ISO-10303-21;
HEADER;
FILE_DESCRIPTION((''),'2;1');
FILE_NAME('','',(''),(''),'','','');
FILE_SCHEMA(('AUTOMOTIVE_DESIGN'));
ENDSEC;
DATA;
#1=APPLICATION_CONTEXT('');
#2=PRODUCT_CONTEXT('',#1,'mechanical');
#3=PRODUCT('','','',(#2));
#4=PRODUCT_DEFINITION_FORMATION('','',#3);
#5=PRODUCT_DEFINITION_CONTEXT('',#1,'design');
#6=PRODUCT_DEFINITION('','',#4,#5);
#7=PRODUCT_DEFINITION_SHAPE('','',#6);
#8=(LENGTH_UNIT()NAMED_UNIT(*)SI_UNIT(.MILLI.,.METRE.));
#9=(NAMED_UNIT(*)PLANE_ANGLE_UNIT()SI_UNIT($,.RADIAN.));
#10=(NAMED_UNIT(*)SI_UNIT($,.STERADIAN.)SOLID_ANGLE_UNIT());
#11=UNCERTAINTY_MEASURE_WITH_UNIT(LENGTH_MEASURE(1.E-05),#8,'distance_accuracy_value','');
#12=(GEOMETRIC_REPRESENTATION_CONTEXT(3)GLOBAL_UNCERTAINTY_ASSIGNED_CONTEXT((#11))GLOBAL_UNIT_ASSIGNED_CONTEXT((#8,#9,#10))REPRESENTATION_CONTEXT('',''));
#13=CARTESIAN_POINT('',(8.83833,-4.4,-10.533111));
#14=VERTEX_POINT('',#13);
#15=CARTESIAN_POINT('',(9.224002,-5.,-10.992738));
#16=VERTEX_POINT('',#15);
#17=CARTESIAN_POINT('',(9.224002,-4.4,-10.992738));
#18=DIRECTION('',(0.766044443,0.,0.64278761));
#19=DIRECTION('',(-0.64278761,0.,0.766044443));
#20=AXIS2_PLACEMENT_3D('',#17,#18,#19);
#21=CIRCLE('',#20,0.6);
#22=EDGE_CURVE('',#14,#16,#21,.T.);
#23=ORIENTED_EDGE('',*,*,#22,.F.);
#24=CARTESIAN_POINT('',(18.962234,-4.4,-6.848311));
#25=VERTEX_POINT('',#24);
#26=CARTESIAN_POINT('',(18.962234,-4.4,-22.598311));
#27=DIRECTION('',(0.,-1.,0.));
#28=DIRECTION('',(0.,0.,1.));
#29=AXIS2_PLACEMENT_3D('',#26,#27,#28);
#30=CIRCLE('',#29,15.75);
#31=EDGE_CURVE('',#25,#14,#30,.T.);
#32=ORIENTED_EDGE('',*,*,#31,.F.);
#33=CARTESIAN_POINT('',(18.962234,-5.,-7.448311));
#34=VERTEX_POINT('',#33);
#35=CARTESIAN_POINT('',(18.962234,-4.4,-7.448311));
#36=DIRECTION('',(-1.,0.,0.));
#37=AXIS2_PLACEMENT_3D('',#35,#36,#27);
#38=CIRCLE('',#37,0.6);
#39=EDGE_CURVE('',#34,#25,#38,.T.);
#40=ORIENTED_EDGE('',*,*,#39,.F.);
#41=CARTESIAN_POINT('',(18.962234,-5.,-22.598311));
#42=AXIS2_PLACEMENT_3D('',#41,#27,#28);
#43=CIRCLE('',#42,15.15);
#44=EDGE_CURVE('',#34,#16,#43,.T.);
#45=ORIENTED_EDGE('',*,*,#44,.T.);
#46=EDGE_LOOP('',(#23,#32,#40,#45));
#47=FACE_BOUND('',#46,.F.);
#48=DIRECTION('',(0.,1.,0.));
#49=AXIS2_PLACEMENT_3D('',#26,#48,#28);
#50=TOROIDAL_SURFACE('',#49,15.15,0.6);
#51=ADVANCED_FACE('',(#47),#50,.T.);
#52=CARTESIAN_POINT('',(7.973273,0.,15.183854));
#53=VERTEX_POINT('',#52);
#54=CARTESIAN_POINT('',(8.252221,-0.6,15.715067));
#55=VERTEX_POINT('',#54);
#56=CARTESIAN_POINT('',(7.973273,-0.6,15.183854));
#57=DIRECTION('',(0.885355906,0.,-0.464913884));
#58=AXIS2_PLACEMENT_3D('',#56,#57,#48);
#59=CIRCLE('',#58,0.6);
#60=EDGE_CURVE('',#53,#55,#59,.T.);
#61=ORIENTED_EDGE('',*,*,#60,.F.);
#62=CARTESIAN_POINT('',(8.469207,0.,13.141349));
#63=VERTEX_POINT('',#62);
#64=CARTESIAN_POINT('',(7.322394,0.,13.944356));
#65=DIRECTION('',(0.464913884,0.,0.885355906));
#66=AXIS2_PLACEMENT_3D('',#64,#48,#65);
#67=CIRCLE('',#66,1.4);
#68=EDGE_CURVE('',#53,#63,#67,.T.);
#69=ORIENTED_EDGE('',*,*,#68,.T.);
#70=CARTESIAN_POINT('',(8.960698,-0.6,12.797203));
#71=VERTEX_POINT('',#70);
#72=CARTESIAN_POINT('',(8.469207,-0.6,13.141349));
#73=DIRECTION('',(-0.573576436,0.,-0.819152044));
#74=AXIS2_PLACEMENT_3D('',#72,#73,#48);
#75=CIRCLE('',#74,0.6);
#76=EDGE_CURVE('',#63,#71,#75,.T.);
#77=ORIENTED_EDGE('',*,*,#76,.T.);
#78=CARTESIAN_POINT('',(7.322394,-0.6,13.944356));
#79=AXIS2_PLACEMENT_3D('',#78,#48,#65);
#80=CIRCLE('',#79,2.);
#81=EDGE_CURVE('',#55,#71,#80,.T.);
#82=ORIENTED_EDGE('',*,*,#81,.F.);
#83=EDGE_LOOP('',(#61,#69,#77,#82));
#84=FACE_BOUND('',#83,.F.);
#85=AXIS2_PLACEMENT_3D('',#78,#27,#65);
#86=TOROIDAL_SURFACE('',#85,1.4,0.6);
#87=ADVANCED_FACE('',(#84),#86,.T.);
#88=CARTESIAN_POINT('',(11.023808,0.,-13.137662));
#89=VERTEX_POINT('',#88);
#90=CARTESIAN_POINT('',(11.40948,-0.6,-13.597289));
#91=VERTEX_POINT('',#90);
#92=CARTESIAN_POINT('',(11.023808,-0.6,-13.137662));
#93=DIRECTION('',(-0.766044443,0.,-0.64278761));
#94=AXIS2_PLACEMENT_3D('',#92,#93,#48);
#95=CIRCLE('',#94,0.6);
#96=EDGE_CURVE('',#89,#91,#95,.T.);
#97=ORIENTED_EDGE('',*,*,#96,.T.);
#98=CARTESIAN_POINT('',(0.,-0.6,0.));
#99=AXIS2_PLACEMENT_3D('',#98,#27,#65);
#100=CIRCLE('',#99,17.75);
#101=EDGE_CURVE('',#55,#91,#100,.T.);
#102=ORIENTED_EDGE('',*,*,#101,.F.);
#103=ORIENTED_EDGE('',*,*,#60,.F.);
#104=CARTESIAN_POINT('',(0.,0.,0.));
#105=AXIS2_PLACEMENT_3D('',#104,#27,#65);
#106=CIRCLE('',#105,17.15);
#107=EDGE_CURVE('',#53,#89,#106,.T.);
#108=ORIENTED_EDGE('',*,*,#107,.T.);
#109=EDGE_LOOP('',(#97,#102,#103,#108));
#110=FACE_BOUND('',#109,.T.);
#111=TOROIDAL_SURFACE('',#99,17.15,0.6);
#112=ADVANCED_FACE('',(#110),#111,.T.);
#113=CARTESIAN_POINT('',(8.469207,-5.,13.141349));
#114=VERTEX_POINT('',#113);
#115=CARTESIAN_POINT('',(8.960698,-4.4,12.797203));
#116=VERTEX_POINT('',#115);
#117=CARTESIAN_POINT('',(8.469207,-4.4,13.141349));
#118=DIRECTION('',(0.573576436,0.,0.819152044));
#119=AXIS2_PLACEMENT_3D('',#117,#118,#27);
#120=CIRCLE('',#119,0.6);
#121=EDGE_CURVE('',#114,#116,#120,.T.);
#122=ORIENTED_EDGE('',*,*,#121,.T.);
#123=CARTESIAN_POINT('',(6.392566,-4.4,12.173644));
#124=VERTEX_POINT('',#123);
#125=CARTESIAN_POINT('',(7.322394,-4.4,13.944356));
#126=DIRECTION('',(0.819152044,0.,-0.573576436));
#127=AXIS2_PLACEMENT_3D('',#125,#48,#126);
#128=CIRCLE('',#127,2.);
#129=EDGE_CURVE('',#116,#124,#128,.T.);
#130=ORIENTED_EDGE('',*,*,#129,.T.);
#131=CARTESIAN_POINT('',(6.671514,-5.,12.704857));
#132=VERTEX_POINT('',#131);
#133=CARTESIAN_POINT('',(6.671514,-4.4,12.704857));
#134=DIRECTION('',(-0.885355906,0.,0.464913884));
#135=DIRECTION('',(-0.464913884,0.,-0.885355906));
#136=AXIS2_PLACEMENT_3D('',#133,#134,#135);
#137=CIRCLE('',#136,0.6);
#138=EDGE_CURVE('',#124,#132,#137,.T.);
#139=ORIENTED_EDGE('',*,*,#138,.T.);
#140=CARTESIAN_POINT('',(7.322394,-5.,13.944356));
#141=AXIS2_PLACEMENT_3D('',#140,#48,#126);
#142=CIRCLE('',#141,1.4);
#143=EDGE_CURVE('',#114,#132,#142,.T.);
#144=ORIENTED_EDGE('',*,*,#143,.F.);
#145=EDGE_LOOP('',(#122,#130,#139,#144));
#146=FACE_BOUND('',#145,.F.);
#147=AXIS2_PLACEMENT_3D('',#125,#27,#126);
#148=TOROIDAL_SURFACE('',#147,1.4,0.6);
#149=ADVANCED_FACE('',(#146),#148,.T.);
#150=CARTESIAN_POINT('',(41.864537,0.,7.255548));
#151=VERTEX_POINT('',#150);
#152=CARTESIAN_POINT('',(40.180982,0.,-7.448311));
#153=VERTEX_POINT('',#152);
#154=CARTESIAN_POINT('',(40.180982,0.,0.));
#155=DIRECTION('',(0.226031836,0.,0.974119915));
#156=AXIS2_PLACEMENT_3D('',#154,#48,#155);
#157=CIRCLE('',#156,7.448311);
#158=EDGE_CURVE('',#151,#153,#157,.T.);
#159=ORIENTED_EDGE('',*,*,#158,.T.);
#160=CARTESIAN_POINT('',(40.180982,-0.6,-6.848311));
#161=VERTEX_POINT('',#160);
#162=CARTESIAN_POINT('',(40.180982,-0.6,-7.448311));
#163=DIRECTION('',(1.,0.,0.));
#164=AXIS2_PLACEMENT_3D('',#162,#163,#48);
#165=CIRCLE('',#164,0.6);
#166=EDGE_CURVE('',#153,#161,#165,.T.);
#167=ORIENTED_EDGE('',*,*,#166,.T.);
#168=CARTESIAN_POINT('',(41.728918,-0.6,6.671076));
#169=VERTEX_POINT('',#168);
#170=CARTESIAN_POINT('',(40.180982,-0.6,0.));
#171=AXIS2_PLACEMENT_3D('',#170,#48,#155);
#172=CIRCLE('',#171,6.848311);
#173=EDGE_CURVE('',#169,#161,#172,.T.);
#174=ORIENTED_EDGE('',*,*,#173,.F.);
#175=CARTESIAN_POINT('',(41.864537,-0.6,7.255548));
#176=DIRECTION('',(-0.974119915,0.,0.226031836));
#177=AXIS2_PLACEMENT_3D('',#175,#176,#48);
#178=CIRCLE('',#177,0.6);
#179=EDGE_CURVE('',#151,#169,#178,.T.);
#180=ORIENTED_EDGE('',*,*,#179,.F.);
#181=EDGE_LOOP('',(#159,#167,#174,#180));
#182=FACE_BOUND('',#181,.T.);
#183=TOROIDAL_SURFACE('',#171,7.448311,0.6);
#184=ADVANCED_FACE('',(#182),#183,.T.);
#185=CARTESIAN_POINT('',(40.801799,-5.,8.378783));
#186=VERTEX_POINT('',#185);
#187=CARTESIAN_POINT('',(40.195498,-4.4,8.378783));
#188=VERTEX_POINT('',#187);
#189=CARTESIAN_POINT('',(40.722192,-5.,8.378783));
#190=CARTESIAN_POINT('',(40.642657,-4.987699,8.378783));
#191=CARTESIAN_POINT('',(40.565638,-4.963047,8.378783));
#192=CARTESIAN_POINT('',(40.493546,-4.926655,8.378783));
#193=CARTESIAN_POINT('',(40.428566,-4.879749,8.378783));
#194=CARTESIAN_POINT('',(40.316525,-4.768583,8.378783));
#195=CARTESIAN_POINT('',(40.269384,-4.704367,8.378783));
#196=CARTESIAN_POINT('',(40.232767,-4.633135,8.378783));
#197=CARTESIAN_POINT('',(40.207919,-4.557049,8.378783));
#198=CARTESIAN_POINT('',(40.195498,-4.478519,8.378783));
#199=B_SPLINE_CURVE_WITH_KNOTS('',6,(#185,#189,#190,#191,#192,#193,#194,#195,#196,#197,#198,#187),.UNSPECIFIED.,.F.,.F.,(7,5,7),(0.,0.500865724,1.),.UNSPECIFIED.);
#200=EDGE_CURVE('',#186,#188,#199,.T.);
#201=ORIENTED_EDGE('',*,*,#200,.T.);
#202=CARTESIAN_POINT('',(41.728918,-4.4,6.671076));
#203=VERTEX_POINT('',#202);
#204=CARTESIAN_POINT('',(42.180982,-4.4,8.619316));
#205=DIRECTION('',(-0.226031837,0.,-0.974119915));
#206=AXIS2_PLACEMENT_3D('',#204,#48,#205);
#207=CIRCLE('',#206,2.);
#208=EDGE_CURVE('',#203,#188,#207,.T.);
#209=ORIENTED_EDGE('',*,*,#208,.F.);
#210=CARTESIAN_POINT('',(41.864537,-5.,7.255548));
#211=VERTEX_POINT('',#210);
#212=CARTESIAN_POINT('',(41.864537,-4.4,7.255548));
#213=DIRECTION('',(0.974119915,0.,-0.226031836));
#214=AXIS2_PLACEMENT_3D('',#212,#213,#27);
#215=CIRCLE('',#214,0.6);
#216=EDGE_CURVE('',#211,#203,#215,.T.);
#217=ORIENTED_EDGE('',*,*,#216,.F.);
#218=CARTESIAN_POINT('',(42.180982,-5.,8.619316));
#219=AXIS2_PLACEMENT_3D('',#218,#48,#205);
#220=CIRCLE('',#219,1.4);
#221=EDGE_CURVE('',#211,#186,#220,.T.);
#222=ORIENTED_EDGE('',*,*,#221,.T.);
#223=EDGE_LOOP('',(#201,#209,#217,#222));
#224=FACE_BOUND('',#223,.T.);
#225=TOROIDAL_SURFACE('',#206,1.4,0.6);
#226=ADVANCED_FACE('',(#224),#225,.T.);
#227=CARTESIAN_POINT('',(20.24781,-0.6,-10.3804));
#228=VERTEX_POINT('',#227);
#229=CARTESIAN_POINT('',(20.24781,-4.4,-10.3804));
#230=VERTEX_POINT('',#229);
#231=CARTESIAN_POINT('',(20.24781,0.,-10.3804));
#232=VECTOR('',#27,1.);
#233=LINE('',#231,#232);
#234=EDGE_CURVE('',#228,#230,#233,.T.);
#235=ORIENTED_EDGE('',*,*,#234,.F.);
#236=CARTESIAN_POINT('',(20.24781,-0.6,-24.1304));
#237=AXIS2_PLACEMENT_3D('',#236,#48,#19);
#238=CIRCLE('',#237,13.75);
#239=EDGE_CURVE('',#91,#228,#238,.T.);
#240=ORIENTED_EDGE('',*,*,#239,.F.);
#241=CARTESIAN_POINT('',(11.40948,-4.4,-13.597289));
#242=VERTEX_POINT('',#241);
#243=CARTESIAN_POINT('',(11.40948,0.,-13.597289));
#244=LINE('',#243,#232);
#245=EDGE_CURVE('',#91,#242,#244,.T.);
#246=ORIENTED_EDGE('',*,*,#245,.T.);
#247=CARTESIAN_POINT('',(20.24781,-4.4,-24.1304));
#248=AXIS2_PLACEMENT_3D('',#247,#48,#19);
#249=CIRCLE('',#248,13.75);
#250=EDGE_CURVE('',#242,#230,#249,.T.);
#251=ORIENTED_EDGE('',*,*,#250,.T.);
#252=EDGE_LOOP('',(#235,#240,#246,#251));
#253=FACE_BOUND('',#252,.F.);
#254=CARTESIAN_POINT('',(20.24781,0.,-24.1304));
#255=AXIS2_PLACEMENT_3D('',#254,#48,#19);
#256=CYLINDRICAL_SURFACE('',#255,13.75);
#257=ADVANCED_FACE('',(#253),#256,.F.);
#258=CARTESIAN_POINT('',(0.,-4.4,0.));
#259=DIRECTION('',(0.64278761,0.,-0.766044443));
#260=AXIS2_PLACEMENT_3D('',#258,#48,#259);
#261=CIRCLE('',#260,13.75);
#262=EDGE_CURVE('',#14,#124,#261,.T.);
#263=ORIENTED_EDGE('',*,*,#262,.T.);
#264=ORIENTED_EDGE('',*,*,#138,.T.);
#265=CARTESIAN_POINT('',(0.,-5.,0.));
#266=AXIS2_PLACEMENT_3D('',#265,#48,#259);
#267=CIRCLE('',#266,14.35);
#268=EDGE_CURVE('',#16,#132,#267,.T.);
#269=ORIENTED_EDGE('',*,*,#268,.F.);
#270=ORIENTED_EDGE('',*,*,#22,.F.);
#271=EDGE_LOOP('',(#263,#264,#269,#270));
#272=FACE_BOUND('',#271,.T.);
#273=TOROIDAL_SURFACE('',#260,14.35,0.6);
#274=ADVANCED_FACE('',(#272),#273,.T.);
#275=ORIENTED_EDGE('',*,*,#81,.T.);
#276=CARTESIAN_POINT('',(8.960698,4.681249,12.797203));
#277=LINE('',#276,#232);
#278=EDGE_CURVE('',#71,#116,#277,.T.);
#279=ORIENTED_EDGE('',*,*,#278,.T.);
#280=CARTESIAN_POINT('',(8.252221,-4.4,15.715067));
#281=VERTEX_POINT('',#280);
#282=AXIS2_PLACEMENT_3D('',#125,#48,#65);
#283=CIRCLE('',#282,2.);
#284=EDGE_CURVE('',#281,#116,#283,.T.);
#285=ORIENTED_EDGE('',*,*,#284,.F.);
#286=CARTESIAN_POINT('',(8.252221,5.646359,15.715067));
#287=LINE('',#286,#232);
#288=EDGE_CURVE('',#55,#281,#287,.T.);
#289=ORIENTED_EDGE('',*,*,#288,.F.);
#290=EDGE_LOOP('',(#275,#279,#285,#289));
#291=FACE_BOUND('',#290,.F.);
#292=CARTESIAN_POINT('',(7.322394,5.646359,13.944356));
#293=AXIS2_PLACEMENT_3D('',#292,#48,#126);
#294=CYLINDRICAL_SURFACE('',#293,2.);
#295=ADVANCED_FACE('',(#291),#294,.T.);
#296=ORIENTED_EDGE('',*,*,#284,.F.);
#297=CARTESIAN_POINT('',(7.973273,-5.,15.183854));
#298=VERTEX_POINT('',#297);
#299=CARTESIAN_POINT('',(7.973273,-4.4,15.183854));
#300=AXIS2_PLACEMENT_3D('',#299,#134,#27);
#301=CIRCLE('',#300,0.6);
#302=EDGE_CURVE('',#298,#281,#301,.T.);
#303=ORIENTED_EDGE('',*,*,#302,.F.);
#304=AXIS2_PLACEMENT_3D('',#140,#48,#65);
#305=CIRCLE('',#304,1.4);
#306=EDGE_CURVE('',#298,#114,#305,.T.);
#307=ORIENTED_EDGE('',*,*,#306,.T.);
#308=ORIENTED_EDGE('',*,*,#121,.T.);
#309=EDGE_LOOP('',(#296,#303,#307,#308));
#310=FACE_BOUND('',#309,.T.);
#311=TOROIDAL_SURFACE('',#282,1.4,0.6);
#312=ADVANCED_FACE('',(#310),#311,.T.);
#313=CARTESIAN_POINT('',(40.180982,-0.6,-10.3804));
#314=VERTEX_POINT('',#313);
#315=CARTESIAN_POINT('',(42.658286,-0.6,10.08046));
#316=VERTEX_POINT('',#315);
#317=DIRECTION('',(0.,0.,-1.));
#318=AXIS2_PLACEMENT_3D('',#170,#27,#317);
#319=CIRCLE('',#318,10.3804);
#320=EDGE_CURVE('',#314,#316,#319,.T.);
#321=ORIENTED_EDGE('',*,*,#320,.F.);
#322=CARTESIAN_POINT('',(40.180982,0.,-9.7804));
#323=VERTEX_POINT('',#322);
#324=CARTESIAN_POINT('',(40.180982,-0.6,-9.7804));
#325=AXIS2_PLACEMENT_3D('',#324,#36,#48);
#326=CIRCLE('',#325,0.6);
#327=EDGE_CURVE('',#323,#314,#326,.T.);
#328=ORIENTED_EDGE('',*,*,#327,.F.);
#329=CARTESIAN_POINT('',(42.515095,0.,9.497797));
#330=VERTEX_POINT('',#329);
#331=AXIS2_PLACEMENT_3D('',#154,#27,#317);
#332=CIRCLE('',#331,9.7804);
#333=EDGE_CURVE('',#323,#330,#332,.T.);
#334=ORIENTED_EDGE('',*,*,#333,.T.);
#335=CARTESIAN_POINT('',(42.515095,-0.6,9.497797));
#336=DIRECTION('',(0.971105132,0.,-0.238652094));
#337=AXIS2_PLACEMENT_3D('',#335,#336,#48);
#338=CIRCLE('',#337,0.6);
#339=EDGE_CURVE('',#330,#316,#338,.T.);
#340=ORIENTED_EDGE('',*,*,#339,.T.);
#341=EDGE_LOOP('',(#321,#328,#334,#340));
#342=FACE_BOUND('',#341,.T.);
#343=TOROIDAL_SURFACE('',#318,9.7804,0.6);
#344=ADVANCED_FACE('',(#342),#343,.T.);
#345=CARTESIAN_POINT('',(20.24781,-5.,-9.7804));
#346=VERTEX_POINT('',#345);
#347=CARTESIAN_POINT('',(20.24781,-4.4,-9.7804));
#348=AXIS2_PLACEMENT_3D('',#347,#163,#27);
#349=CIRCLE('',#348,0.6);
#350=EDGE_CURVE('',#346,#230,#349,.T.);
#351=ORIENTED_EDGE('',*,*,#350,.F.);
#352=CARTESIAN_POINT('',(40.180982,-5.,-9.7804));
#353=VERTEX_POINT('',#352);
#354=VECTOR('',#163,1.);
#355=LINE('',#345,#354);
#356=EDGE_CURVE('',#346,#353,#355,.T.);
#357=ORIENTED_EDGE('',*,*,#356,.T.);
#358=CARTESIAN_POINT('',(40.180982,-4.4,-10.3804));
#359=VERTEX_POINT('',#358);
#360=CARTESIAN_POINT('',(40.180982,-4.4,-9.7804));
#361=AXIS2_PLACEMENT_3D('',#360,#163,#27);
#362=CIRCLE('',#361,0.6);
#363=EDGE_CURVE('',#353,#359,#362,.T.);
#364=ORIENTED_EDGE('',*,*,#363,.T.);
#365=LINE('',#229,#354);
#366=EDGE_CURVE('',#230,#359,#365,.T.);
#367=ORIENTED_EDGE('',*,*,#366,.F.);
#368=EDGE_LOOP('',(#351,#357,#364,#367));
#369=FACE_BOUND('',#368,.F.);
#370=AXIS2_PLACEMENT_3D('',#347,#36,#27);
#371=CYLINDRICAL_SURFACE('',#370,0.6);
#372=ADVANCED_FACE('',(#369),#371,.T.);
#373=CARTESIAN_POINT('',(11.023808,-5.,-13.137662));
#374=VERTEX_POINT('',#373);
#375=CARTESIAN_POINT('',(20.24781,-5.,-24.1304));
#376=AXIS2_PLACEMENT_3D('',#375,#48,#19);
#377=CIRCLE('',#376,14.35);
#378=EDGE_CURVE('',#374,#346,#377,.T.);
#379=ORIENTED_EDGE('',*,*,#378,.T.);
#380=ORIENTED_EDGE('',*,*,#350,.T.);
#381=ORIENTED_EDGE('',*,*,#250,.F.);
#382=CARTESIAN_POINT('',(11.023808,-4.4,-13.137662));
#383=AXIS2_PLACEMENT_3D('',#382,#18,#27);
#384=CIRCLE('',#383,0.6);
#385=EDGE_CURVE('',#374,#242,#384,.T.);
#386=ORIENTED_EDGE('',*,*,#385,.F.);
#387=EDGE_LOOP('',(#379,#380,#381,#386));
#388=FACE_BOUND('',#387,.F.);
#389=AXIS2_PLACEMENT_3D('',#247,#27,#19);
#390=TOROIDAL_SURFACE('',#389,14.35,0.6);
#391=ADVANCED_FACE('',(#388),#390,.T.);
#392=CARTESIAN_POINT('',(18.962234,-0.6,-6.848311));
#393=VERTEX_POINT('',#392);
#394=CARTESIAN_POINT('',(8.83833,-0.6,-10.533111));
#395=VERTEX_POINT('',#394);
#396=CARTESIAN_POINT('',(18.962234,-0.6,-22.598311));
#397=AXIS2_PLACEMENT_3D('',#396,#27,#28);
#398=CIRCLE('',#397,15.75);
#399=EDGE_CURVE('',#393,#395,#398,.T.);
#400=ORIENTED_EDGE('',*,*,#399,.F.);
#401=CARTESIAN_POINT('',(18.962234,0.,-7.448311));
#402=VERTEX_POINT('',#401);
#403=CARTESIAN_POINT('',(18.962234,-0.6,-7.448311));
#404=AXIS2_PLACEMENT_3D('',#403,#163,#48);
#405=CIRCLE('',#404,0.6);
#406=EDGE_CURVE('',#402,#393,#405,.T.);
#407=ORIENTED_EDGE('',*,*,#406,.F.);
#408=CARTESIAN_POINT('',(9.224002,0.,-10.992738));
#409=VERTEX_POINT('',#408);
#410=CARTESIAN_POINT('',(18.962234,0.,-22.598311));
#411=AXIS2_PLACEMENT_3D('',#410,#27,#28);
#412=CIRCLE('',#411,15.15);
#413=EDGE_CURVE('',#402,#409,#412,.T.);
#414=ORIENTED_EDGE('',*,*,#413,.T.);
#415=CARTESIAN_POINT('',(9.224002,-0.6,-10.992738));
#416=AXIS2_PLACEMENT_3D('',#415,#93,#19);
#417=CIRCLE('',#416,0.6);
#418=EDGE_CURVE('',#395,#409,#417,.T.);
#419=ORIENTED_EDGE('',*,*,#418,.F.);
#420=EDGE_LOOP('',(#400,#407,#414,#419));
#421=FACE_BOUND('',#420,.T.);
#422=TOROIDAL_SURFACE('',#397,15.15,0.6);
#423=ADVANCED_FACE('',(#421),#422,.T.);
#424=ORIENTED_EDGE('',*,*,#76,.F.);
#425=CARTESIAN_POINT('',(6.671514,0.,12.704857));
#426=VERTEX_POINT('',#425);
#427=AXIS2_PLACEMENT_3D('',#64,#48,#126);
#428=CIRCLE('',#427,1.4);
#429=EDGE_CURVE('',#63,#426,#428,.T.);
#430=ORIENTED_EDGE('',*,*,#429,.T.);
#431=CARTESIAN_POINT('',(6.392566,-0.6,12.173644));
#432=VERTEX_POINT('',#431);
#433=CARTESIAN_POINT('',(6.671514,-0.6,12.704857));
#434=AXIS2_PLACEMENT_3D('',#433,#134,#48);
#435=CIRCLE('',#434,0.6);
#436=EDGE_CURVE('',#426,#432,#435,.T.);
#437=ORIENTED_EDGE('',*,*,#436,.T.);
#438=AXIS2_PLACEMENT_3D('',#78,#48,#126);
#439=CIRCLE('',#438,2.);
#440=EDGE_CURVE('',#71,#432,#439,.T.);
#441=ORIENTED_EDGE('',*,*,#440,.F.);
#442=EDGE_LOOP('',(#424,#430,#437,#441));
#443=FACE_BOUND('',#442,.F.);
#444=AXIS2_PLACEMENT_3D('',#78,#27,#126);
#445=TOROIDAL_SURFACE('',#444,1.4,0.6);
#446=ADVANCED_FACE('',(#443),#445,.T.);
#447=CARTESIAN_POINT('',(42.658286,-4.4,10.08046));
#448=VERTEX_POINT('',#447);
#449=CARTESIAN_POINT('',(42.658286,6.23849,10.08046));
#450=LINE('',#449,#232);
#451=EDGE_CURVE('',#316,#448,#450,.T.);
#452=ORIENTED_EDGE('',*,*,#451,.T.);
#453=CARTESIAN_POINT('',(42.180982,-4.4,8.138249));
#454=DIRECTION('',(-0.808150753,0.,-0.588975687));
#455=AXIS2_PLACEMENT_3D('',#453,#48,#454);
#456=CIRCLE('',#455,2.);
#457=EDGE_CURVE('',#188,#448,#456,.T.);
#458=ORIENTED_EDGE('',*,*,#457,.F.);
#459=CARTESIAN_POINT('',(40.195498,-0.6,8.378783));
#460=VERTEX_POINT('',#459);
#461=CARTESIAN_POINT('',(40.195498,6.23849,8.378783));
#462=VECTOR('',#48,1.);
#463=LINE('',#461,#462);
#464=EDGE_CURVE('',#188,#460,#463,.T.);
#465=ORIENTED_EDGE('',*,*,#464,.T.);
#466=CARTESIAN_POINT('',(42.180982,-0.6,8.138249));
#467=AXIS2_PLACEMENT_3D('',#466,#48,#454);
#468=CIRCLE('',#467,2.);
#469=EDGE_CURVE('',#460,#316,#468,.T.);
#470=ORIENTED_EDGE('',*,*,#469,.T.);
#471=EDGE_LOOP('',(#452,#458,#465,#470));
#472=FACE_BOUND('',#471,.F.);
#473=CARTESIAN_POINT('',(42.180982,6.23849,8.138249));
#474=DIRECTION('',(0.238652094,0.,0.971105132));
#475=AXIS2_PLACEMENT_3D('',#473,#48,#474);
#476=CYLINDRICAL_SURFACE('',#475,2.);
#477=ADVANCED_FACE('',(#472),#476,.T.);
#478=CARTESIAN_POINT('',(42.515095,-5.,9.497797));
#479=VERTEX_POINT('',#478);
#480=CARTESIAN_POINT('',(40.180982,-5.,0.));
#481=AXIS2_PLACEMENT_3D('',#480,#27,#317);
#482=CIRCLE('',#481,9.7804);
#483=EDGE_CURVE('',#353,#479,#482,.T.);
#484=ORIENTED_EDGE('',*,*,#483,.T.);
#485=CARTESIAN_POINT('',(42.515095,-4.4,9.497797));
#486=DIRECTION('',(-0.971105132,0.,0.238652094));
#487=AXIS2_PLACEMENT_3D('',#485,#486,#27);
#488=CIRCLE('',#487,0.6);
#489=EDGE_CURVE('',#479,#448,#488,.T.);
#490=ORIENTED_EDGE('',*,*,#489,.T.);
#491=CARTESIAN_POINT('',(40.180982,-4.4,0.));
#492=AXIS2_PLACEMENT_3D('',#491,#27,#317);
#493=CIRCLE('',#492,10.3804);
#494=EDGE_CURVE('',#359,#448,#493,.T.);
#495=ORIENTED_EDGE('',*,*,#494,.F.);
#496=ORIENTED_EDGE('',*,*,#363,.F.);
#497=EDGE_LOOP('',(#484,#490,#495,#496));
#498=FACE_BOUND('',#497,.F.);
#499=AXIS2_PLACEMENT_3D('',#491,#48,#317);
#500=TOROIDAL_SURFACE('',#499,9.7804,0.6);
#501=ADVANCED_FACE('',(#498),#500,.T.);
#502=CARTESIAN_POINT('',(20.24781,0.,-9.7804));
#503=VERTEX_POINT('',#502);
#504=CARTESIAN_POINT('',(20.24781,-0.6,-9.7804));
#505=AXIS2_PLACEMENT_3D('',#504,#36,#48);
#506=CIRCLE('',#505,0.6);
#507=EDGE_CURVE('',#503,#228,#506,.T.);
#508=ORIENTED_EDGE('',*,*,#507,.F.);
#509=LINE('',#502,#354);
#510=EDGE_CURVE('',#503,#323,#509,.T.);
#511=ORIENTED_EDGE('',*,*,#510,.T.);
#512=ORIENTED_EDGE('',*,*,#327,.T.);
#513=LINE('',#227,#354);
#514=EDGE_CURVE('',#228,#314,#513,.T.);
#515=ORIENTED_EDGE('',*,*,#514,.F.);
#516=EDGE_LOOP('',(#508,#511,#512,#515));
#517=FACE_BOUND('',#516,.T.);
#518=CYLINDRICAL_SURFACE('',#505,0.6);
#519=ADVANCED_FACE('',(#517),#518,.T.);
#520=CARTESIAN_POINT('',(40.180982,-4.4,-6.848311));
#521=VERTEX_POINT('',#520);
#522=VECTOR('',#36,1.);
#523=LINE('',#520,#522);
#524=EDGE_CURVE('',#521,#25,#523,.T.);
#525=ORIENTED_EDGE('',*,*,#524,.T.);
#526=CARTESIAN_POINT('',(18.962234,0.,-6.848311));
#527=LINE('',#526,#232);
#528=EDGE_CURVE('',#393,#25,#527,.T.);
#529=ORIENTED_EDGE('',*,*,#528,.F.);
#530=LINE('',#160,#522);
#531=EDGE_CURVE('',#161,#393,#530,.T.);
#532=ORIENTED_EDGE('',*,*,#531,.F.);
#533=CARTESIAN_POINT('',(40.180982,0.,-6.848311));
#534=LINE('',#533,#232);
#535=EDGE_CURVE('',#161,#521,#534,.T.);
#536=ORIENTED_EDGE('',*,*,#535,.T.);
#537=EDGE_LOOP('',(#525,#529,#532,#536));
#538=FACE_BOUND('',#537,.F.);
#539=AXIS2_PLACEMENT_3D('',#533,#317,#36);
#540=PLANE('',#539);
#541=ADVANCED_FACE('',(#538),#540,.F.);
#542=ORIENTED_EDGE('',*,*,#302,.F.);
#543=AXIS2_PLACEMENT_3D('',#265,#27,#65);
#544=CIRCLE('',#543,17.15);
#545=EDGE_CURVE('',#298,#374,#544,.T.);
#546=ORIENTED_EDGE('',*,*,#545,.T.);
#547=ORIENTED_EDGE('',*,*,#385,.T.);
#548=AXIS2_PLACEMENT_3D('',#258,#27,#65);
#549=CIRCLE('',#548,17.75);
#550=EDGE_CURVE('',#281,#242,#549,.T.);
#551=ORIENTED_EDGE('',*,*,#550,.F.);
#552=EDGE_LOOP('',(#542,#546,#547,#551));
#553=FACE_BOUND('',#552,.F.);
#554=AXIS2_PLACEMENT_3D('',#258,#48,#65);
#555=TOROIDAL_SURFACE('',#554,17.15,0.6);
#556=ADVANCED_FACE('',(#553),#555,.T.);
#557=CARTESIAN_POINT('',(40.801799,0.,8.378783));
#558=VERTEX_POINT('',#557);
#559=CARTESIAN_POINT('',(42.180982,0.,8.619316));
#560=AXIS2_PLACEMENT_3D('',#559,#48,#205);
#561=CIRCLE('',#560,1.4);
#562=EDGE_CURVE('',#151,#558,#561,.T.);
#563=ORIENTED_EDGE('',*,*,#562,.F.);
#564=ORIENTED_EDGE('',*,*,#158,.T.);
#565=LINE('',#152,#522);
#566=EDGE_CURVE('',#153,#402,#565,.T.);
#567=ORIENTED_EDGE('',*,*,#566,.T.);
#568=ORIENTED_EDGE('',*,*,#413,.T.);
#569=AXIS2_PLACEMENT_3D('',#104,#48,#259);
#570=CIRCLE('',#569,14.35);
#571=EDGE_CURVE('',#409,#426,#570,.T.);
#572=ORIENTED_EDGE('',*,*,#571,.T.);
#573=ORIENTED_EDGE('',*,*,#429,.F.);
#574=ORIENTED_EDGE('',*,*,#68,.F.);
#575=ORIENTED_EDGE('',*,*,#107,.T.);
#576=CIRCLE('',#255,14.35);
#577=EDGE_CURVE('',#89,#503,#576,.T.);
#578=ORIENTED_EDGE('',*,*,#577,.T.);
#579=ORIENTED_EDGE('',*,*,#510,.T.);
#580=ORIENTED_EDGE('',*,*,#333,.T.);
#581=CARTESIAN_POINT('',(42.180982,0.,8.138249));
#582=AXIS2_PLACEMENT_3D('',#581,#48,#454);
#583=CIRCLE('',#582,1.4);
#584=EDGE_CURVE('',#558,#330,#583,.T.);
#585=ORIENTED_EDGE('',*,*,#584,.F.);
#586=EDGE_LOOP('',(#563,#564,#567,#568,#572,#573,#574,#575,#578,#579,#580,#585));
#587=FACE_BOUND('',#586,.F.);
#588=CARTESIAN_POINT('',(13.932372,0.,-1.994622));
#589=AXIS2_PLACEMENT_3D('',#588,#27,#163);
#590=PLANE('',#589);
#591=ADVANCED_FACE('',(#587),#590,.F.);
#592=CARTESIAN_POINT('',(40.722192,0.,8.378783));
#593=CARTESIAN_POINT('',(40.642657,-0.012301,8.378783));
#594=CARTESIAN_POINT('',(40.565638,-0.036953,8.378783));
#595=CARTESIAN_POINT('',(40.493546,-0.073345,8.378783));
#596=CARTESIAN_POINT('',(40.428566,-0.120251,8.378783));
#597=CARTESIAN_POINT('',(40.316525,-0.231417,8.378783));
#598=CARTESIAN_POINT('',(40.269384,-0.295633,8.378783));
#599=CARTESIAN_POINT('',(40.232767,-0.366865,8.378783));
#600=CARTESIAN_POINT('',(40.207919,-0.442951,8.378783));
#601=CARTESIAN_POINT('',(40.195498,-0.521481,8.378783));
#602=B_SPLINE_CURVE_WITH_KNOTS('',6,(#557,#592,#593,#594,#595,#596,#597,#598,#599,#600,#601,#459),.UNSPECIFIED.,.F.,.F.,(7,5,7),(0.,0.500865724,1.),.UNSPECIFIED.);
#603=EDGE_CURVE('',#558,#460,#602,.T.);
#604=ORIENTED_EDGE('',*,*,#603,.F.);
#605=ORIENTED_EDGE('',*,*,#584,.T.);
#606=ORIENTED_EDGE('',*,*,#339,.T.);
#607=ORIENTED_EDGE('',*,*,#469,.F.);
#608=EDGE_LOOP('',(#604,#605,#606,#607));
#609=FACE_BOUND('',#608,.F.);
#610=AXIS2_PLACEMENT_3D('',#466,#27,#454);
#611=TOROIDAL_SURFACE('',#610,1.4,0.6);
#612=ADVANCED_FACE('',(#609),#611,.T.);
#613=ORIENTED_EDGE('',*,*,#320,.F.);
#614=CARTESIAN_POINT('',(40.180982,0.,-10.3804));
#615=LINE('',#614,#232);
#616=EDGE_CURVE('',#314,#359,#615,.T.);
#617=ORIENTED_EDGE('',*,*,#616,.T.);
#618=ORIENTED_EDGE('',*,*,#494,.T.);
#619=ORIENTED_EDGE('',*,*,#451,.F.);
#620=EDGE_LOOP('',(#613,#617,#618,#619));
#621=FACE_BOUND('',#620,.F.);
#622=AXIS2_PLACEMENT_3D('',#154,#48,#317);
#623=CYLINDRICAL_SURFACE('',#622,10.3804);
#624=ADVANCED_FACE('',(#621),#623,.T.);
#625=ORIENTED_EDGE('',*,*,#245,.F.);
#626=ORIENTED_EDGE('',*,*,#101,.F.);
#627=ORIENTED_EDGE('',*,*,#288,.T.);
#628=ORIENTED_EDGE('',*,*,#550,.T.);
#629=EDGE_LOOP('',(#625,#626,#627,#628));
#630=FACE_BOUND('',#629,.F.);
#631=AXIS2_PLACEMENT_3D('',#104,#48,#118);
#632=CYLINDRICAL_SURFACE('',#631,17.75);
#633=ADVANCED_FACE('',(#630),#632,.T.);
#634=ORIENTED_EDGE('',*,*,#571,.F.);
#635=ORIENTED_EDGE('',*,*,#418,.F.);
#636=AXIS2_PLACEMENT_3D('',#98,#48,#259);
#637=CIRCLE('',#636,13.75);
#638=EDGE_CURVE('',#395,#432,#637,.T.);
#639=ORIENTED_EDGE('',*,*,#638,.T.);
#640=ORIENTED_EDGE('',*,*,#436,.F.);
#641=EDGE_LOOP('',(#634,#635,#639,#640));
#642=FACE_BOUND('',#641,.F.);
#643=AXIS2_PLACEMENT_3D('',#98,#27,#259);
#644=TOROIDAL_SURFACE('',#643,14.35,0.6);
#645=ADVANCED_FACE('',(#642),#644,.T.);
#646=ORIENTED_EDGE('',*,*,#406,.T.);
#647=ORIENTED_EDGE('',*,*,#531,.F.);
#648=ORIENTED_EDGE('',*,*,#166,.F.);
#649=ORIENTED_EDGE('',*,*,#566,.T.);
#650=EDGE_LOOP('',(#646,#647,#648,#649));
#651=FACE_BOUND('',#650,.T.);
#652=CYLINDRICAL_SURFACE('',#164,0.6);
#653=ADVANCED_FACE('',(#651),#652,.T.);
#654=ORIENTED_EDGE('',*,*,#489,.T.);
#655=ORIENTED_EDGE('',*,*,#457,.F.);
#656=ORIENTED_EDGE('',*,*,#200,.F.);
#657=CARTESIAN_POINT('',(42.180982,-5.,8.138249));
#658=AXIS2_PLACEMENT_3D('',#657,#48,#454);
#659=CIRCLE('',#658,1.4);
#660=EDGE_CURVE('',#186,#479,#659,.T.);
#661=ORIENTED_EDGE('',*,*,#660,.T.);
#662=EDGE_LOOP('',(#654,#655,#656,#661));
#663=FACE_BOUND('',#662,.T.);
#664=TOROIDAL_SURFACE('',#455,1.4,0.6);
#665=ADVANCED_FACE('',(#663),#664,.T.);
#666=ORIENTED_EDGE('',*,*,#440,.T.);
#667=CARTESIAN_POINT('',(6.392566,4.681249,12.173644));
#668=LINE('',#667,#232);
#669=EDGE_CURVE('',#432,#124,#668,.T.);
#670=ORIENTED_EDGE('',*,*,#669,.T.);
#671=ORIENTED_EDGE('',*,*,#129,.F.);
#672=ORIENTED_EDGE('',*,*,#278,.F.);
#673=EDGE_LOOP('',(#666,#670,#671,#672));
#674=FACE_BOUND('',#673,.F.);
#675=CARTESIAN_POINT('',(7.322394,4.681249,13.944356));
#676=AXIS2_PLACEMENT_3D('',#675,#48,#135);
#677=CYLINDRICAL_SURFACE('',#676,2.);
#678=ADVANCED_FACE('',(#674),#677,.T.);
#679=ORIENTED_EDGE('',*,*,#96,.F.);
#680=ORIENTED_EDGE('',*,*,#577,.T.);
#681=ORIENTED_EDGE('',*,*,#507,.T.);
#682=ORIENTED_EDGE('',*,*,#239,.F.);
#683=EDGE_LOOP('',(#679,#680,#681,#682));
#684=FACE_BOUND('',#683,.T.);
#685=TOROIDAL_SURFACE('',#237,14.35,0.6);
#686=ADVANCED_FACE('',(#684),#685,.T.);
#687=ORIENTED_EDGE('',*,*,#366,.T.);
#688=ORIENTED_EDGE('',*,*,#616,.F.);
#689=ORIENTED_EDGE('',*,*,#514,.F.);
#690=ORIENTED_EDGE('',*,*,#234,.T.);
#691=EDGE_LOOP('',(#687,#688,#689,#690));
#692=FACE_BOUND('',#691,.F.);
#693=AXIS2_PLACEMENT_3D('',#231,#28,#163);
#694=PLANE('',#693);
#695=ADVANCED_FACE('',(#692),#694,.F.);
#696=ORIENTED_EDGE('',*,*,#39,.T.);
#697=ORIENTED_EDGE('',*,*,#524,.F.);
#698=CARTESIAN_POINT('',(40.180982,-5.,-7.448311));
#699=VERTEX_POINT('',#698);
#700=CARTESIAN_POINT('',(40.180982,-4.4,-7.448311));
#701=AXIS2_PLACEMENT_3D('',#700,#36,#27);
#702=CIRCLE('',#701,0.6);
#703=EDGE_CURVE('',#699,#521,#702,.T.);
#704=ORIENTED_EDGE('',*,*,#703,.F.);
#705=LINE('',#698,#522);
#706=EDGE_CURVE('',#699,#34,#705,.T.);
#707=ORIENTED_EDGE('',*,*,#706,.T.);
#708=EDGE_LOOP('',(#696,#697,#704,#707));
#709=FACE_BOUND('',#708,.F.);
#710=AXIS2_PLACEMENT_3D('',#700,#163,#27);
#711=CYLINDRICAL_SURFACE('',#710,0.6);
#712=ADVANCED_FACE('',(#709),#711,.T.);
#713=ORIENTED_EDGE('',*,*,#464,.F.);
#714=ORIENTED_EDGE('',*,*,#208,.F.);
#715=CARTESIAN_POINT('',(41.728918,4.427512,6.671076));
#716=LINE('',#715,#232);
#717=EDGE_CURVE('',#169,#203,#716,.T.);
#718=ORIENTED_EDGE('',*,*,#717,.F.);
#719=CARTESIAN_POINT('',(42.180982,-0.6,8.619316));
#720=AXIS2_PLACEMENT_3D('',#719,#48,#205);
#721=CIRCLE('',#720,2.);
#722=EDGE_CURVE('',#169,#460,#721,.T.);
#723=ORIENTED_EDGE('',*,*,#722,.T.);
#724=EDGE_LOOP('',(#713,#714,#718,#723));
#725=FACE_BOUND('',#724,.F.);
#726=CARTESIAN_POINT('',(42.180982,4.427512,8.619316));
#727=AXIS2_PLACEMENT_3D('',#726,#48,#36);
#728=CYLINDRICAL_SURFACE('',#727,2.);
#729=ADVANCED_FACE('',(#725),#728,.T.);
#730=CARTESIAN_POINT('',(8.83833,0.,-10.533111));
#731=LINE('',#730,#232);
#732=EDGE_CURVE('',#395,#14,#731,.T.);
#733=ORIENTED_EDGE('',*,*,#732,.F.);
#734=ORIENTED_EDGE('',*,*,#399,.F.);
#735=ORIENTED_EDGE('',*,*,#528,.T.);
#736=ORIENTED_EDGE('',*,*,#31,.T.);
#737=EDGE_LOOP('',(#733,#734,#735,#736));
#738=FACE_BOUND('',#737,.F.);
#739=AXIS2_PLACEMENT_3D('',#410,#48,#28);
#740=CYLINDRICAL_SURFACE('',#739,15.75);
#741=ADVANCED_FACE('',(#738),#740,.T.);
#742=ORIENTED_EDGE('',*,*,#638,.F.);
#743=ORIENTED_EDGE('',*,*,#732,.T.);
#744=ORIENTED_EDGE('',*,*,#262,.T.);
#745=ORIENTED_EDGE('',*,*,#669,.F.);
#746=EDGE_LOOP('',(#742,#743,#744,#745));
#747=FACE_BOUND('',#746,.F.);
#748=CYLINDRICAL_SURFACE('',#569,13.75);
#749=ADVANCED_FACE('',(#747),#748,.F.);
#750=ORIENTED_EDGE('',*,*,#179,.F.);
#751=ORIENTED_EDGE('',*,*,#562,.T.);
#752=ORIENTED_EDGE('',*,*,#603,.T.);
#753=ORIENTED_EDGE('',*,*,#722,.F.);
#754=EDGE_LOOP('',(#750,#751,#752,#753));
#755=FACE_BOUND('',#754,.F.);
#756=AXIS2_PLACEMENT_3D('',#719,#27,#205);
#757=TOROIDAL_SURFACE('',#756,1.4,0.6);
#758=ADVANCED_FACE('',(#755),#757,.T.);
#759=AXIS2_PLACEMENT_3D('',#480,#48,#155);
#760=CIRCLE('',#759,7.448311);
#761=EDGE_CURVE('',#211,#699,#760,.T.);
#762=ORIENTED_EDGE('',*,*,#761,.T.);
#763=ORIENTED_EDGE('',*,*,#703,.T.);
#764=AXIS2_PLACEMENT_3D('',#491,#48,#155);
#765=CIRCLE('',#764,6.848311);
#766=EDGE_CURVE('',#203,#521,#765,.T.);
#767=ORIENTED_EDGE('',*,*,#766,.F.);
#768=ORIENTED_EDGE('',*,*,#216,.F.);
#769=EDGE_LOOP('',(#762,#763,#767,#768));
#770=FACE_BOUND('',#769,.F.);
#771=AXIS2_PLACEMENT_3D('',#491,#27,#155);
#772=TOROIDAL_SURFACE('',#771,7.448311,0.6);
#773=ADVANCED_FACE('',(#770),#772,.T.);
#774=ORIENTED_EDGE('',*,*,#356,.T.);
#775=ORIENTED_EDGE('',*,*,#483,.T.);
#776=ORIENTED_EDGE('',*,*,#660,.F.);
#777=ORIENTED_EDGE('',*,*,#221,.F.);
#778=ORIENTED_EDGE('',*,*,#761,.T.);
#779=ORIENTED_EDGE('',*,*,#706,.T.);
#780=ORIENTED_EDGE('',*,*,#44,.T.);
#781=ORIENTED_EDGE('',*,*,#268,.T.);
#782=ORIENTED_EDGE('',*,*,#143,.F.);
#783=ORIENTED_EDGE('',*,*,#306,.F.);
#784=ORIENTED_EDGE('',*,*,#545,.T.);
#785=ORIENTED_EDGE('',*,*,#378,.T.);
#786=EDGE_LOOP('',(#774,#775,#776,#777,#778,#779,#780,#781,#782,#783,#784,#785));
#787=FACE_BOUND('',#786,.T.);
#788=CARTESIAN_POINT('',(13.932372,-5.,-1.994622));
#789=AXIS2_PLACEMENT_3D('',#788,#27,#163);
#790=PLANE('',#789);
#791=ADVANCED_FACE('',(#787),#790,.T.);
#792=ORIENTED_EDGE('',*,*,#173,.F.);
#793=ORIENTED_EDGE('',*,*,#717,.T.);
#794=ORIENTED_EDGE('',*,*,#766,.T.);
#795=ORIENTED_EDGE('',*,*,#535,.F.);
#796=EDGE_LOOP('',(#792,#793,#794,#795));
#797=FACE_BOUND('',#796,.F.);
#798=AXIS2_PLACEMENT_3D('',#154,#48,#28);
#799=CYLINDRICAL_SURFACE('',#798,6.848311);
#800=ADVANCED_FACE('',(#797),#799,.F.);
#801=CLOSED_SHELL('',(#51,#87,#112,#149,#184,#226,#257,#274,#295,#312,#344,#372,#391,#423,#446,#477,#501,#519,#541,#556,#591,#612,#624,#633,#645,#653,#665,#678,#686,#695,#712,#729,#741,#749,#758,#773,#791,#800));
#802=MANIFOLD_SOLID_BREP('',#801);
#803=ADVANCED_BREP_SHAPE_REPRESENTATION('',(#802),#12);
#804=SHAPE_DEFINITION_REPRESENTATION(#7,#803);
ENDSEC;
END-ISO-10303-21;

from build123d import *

# Parameters (mm, degrees)
F1_DEPTH     = 5
F2_T1_DEPTH  = 14.3624989998
F2_T3_DEPTH  = 16.2927187909
F2_T5_DEPTH  = 17.4769790167
F2_T7_DEPTH  = 13.8550247905
F3_T3_ANGLE  = 247.7046489152
F3_T6_ANGLE  = 113.0112311354
F3_T9_ANGLE  = 139.8913530699
F3_T12_ANGLE = 166.1930004756
F3_T15_DEPTH = 19.9331720401
F3_T18_ANGLE = 40
F3_T21_ANGLE = 247.7046489152
F3_T24_ANGLE = 97.2953510826
F3_T27_ANGLE = 82.7046489032
F3_T30_ANGLE = 247.704648915
F3_T33_ANGLE = 40
F3_T36_DEPTH = 21.2187472595
F3_T39_ANGLE = 166.9364387389
F3_T42_ANGLE = 97.2953510826
F3_T45_ANGLE = 40
F3_T48_DEPTH = 19.9331720401
F3_T51_ANGLE = 166.1930004756
F3_T54_ANGLE = 139.8913530699
F3_T57_ANGLE = 82.7046489032
F3_T60_ANGLE = 247.704648915
F3_T63_ANGLE = 40
F3_T66_DEPTH = 21.2187472595
F3_T69_ANGLE = 166.9364387389
F3_T72_ANGLE = 113.0112311354


# Not quite as in the source:
# - a fillet or chamfer that OpenCascade refuses, or shapes differently, is made with other operations: its cross-section is extruded or revolved along the edge and cut away or added


with BuildPart() as f1:
    # F0 (on Front) → F1 (new body)
    with BuildSketch(Plane.XZ):
        with BuildLine():
            ThreePointArc((8.8383296332, -10.5331110929), (-13.7369130468, -0.5997665763), (7.8866759998, 11.263340609))
            Line((7.8866759998, 11.263340609), (10.1809817452, 14.5399487861))
            ThreePointArc((10.1809817452, 14.5399487861), (-17.7331059331, -0.7742441257), (11.4094800719, -13.5972888654))
            ThreePointArc((11.4094800719, -13.5972888654), (15.5450327344, -11.2096264224), (20.2478097051, -10.3803999582))
            Line((20.2478097051, -10.3803999582), (40.1809817452, -10.3803999582))
            ThreePointArc((40.1809817452, -10.3803999582), (50.5613817035, 0), (40.1809817452, 10.3803999582))
            Line((40.1809817452, 10.3803999582), (40.1809817452, 6.848311072))
            ThreePointArc((40.1809817452, 6.848311072), (47.0292928172, 0), (40.1809817452, -6.848311072))
            Line((40.1809817452, -6.848311072), (18.9622344858, -6.848311072))
            ThreePointArc((18.9622344858, -6.848311072), (13.5754172284, -7.7981522946), (8.8383296332, -10.5331110929))
        make_face()
    extrude(amount=F1_DEPTH)

    # F2: fillet of radius 2 on 4 edges, made by hand

    # F2_s2 → F2_t1 (cut)
    with BuildSketch(Plane.XZ.offset(-4.6812494999)):
        with BuildLine():
            ThreePointArc((6.3925659055, 12.1736437086), (7.7942952649, 12.0008255138), (8.9606977622, 12.797202648))
            Line((8.9606977622, 12.797202648), (7.8866759998, 11.263340609))
            ThreePointArc((7.8866759998, 11.263340609), (7.1541142206, 11.7422804309), (6.3925659055, 12.1736437086))
        make_face()
    extrude(amount=F2_T1_DEPTH, mode=Mode.SUBTRACT)

    # F2_s4 → F2_t3 (cut)
    with BuildSketch(Plane.XZ.offset(-5.6463593955)):
        with BuildLine():
            ThreePointArc((8.9606977622, 12.797202648), (9.2659236806, 14.4162571121), (8.2522214417, 15.7150673329))
            ThreePointArc((8.2522214417, 15.7150673329), (9.2353110847, 15.1582165563), (10.1809817452, 14.5399487861))
            Line((10.1809817452, 14.5399487861), (8.9606977622, 12.797202648))
        make_face()
    extrude(amount=F2_T3_DEPTH, mode=Mode.SUBTRACT)

    # F2_s6 → F2_t5 (cut)
    with BuildSketch(Plane.XZ.offset(-6.2384895083)):
        with BuildLine():
            ThreePointArc((42.6582859336, 10.0804596746), (40.947006133, 9.7121948311), (40.1809817452, 8.1382494101))
            Line((40.1809817452, 8.1382494101), (40.1809817452, 10.3803999582))
            ThreePointArc((40.1809817452, 10.3803999582), (41.4286796469, 10.3051420776), (42.6582859336, 10.0804596746))
        make_face()
    extrude(amount=F2_T5_DEPTH, mode=Mode.SUBTRACT)

    # F2_s8 → F2_t7 (cut)
    with BuildSketch(Plane.XZ.offset(-4.4275123953)):
        with BuildLine():
            ThreePointArc((40.1809817452, 8.6193160301), (40.6150750837, 7.3751551372), (41.7289180726, 6.6710761999))
            ThreePointArc((41.7289180726, 6.6710761999), (40.9600066282, 6.8038580798), (40.1809817452, 6.848311072))
            Line((40.1809817452, 6.848311072), (40.1809817452, 8.6193160301))
        make_face()
    extrude(amount=F2_T7_DEPTH, mode=Mode.SUBTRACT)

    # F3: fillet of radius 0.6 on 13 edges, made by hand


with BuildPart() as f3_tool1:
    # F3_s2 → F3_t3 (revolve)
    with BuildSketch(Plane(origin=(0, 0, 0), x_dir=(0, 1, 0), z_dir=(0.8853559061, 0, -0.464913884))):
        with BuildLine():
            ThreePointArc((-5, 17.15), (-4.8242640687, 17.5742640687), (-4.4, 17.75))
            Line((-4.4, 17.75), (-5, 17.75))
            Line((-5, 17.75), (-5, 17.15))
        make_face()
    revolve(axis=Axis((0, -5, 0), (0, -1, 0)), revolution_arc=F3_T3_ANGLE)


with BuildPart() as f3_tool4:
    # F3_s5 → F3_t6 (revolve)
    with BuildSketch(Plane(origin=(38.1281196757, 0, -8.8471334716), x_dir=(0, 1, 0), z_dir=(0.9741199151, 0, -0.2260318363))):
        with BuildLine():
            ThreePointArc((0, 16.5304921614), (-0.1757359313, 16.1062280927), (-0.6, 15.9304921614))
            Line((-0.6, 15.9304921614), (0, 15.9304921614))
            Line((0, 15.9304921614), (0, 16.5304921614))
        make_face()
    revolve(axis=Axis((42.1809817453, 0, 8.6193160301), (0, 1, 0)), revolution_arc=F3_T6_ANGLE)


with BuildPart() as f3_tool7:
    # F3_s8 → F3_t9 (revolve)
    with BuildSketch(Plane(origin=(10.7586070612, 0, -14.762199147), x_dir=(0, 1, 0), z_dir=(0.5889756878, 0, -0.8081507528))):
        with BuildLine():
            ThreePointArc((0, 37.4818231941), (-0.1757359313, 37.0575591254), (-0.6, 36.8818231941))
            Line((-0.6, 36.8818231941), (0, 36.8818231941))
            Line((0, 36.8818231941), (0, 37.4818231941))
        make_face()
    revolve(axis=Axis((42.1809817452, 0, 8.13824941), (0, 1, 0)), revolution_arc=F3_T9_ANGLE)


with BuildPart() as f3_tool10:
    # F3_s11 → F3_t12 (revolve)
    with BuildSketch(Plane.YZ.offset(40.1809817452)):
        with BuildLine():
            ThreePointArc((0, -9.7803999582), (-0.1757359313, -10.204664027), (-0.6, -10.3803999582))
            Line((-0.6, -10.3803999582), (0, -10.3803999582))
            Line((0, -10.3803999582), (0, -9.7803999582))
        make_face()
    revolve(axis=Axis((40.1809817452, 0, 0), (0, -1, 0)), revolution_arc=F3_T12_ANGLE)


with BuildPart() as f3_tool13:
    # F3_s14 → F3_t15 (new body)
    with BuildSketch(Plane.YZ.offset(20.2478097051)):
        with BuildLine():
            ThreePointArc((0, -9.7803999582), (-0.1757359313, -10.204664027), (-0.6, -10.3803999582))
            Line((-0.6, -10.3803999582), (0, -10.3803999582))
            Line((0, -10.3803999582), (0, -9.7803999582))
        make_face()
    extrude(amount=F3_T15_DEPTH)


with BuildPart() as f3_tool16:
    # F3_s17 → F3_t18 (revolve)
    with BuildSketch(Plane(origin=(0, 0, 0), x_dir=(0, 1, 0), z_dir=(-0.7660444431, 0, -0.6427876097))):
        with BuildLine():
            ThreePointArc((0, 17.15), (-0.1757359313, 17.5742640687), (-0.6, 17.75))
            Line((-0.6, 17.75), (0, 17.75))
            Line((0, 17.75), (0, 17.15))
        make_face()
    revolve(axis=Axis((20.2478097051, 0, -24.1303999582), (0, 1, 0)), revolution_arc=F3_T18_ANGLE)


with BuildPart() as f3_tool19:
    # F3_s20 → F3_t21 (revolve)
    with BuildSketch(Plane(origin=(0, 0, 0), x_dir=(0, 1, 0), z_dir=(0.8853559061, 0, -0.464913884))):
        with BuildLine():
            ThreePointArc((0, 17.15), (-0.1757359313, 17.5742640687), (-0.6, 17.75))
            Line((-0.6, 17.75), (0, 17.75))
            Line((0, 17.75), (0, 17.15))
        make_face()
    revolve(axis=Axis((0, 0, 0), (0, -1, 0)), revolution_arc=F3_T21_ANGLE)


with BuildPart() as f3_tool22:
    # F3_s23 → F3_t24 (revolve)
    with BuildSketch(Plane(origin=(-3e-10, 0, 2e-10), x_dir=(0, 1, 0), z_dir=(-0.8853559061, 0, 0.4649138841))):
        with BuildLine():
            ThreePointArc((0, -17.15), (-0.1757359313, -17.5742640687), (-0.6, -17.75))
            Line((-0.6, -17.75), (0, -17.75))
            Line((0, -17.75), (0, -17.15))
        make_face()
    revolve(axis=Axis((7.3223936736, 0, 13.9443555207), (0, 1, 0)), revolution_arc=F3_T24_ANGLE)


with BuildPart() as f3_tool25:
    # F3_s26 → F3_t27 (revolve)
    with BuildSketch(Plane(origin=(8.9606977638, 0, 12.7972026469), x_dir=(0, 1, 0), z_dir=(0.5735764365, 0, 0.8191520442))):
        with BuildLine():
            ThreePointArc((0, 0.600000002), (-0.1757359313, 0.1757359332), (-0.6, 2e-09))
            Line((-0.6, 2e-09), (0, 2e-09))
            Line((0, 2e-09), (0, 0.600000002))
        make_face()
    revolve(axis=Axis((7.3223936736, 0, 13.9443555211), (0, 1, 0)), revolution_arc=F3_T27_ANGLE)


with BuildPart() as f3_tool28:
    # F3_s29 → F3_t30 (revolve)
    with BuildSketch(Plane(origin=(0, 0, 0), x_dir=(0, 1, 0), z_dir=(0.7660444431, 0, 0.6427876097))):
        with BuildLine():
            ThreePointArc((-0.6, -13.75), (-0.1757359313, -13.9257359313), (0, -14.35))
            Line((0, -14.35), (0, -13.75))
            Line((0, -13.75), (-0.6, -13.75))
        make_face()
    revolve(axis=Axis((0, 0, 0), (0, 1, 0)), revolution_arc=F3_T30_ANGLE)


with BuildPart() as f3_tool31:
    # F3_s32 → F3_t33 (revolve)
    with BuildSketch(Plane.YZ.offset(18.9622344858)):
        with BuildLine():
            ThreePointArc((0, -7.448311072), (-0.1757359313, -7.0240470033), (-0.6, -6.848311072))
            Line((-0.6, -6.848311072), (0, -6.848311072))
            Line((0, -6.848311072), (0, -7.448311072))
        make_face()
    revolve(axis=Axis((18.9622344858, 0, -22.598311072), (0, -1, 0)), revolution_arc=F3_T33_ANGLE)


with BuildPart() as f3_tool34:
    # F3_s35 → F3_t36 (new body)
    with BuildSketch(Plane.YZ.offset(40.1809817452)):
        with BuildLine():
            ThreePointArc((0, -7.448311072), (-0.1757359313, -7.0240470033), (-0.6, -6.848311072))
            Line((-0.6, -6.848311072), (0, -6.848311072))
            Line((0, -6.848311072), (0, -7.448311072))
        make_face()
    extrude(amount=-F3_T36_DEPTH)


with BuildPart() as f3_tool37:
    # F3_s38 → F3_t39 (revolve)
    with BuildSketch(Plane(origin=(38.1281196757, 0, -8.8471334717), x_dir=(0, 1, 0), z_dir=(-0.9741199151, 0, 0.2260318363))):
        with BuildLine():
            ThreePointArc((0, -16.5304921615), (-0.1757359313, -16.1062280928), (-0.6, -15.9304921615))
            Line((-0.6, -15.9304921615), (0, -15.9304921615))
            Line((0, -15.9304921615), (0, -16.5304921615))
        make_face()
    revolve(axis=Axis((40.1809817452, 0, 0), (0, 1, 0)), revolution_arc=F3_T39_ANGLE)


with BuildPart() as f3_tool40:
    # F3_s41 → F3_t42 (revolve)
    with BuildSketch(Plane(origin=(-3e-10, 0, 2e-10), x_dir=(0, 1, 0), z_dir=(-0.8853559061, 0, 0.4649138841))):
        with BuildLine():
            ThreePointArc((-5, -17.15), (-4.8242640687, -17.5742640687), (-4.4, -17.75))
            Line((-4.4, -17.75), (-5, -17.75))
            Line((-5, -17.75), (-5, -17.15))
        make_face()
    revolve(axis=Axis((7.3223936736, -5, 13.9443555207), (0, 1, 0)), revolution_arc=F3_T42_ANGLE)


with BuildPart() as f3_tool43:
    # F3_s44 → F3_t45 (revolve)
    with BuildSketch(Plane(origin=(0, 0, 0), x_dir=(0, 1, 0), z_dir=(-0.7660444431, 0, -0.6427876097))):
        with BuildLine():
            ThreePointArc((-5, 17.15), (-4.8242640687, 17.5742640687), (-4.4, 17.75))
            Line((-4.4, 17.75), (-5, 17.75))
            Line((-5, 17.75), (-5, 17.15))
        make_face()
    revolve(axis=Axis((20.2478097051, -5, -24.1303999582), (0, 1, 0)), revolution_arc=F3_T45_ANGLE)


with BuildPart() as f3_tool46:
    # F3_s47 → F3_t48 (new body)
    with BuildSketch(Plane.YZ.offset(20.2478097051)):
        with BuildLine():
            ThreePointArc((-5, -9.7803999582), (-4.8242640687, -10.204664027), (-4.4, -10.3803999582))
            Line((-4.4, -10.3803999582), (-5, -10.3803999582))
            Line((-5, -10.3803999582), (-5, -9.7803999582))
        make_face()
    extrude(amount=F3_T48_DEPTH)


with BuildPart() as f3_tool49:
    # F3_s50 → F3_t51 (revolve)
    with BuildSketch(Plane.YZ.offset(40.1809817452)):
        with BuildLine():
            ThreePointArc((-5, -9.7803999582), (-4.8242640687, -10.204664027), (-4.4, -10.3803999582))
            Line((-4.4, -10.3803999582), (-5, -10.3803999582))
            Line((-5, -10.3803999582), (-5, -9.7803999582))
        make_face()
    revolve(axis=Axis((40.1809817452, -5, 0), (0, -1, 0)), revolution_arc=F3_T51_ANGLE)


with BuildPart() as f3_tool52:
    # F3_s53 → F3_t54 (revolve)
    with BuildSketch(Plane(origin=(10.7586070612, 0, -14.762199147), x_dir=(0, 1, 0), z_dir=(0.5889756878, 0, -0.8081507528))):
        with BuildLine():
            ThreePointArc((-5, 37.4818231941), (-4.8242640687, 37.0575591254), (-4.4, 36.8818231941))
            Line((-4.4, 36.8818231941), (-5, 36.8818231941))
            Line((-5, 36.8818231941), (-5, 37.4818231941))
        make_face()
    revolve(axis=Axis((42.1809817452, -5, 8.13824941), (0, 1, 0)), revolution_arc=F3_T54_ANGLE)


with BuildPart() as f3_tool55:
    # F3_s56 → F3_t57 (revolve)
    with BuildSketch(Plane(origin=(8.9606977638, 0, 12.7972026469), x_dir=(0, 1, 0), z_dir=(0.5735764365, 0, 0.8191520442))):
        with BuildLine():
            ThreePointArc((-4.4, 2e-09), (-4.8242640687, 0.1757359332), (-5, 0.600000002))
            Line((-5, 0.600000002), (-5, 2e-09))
            Line((-5, 2e-09), (-4.4, 2e-09))
        make_face()
    revolve(axis=Axis((7.3223936736, -5, 13.9443555211), (0, 1, 0)), revolution_arc=F3_T57_ANGLE)


with BuildPart() as f3_tool58:
    # F3_s59 → F3_t60 (revolve)
    with BuildSketch(Plane(origin=(0, 0, 0), x_dir=(0, 1, 0), z_dir=(0.7660444431, 0, 0.6427876097))):
        with BuildLine():
            ThreePointArc((-4.4, -13.75), (-4.8242640687, -13.9257359313), (-5, -14.35))
            Line((-5, -14.35), (-5, -13.75))
            Line((-5, -13.75), (-4.4, -13.75))
        make_face()
    revolve(axis=Axis((0, -5, 0), (0, 1, 0)), revolution_arc=F3_T60_ANGLE)


with BuildPart() as f3_tool61:
    # F3_s62 → F3_t63 (revolve)
    with BuildSketch(Plane.YZ.offset(18.9622344858)):
        with BuildLine():
            ThreePointArc((-5, -7.448311072), (-4.8242640687, -7.0240470033), (-4.4, -6.848311072))
            Line((-4.4, -6.848311072), (-5, -6.848311072))
            Line((-5, -6.848311072), (-5, -7.448311072))
        make_face()
    revolve(axis=Axis((18.9622344858, -5, -22.598311072), (0, -1, 0)), revolution_arc=F3_T63_ANGLE)


with BuildPart() as f3_tool64:
    # F3_s65 → F3_t66 (new body)
    with BuildSketch(Plane.YZ.offset(40.1809817452)):
        with BuildLine():
            ThreePointArc((-5, -7.448311072), (-4.8242640687, -7.0240470033), (-4.4, -6.848311072))
            Line((-4.4, -6.848311072), (-5, -6.848311072))
            Line((-5, -6.848311072), (-5, -7.448311072))
        make_face()
    extrude(amount=-F3_T66_DEPTH)


with BuildPart() as f3_tool67:
    # F3_s68 → F3_t69 (revolve)
    with BuildSketch(Plane(origin=(38.1281196757, 0, -8.8471334717), x_dir=(0, 1, 0), z_dir=(-0.9741199151, 0, 0.2260318363))):
        with BuildLine():
            ThreePointArc((-5, -16.5304921615), (-4.8242640687, -16.1062280928), (-4.4, -15.9304921615))
            Line((-4.4, -15.9304921615), (-5, -15.9304921615))
            Line((-5, -15.9304921615), (-5, -16.5304921615))
        make_face()
    revolve(axis=Axis((40.1809817452, -5, 0), (0, 1, 0)), revolution_arc=F3_T69_ANGLE)


with BuildPart() as f3_tool70:
    # F3_s71 → F3_t72 (revolve)
    with BuildSketch(Plane(origin=(38.1281196757, 0, -8.8471334716), x_dir=(0, 1, 0), z_dir=(0.9741199151, 0, -0.2260318363))):
        with BuildLine():
            ThreePointArc((-5, 16.5304921614), (-4.8242640687, 16.1062280927), (-4.4, 15.9304921614))
            Line((-4.4, 15.9304921614), (-5, 15.9304921614))
            Line((-5, 15.9304921614), (-5, 16.5304921614))
        make_face()
    revolve(axis=Axis((42.1809817453, -5, 8.6193160301), (0, 1, 0)), revolution_arc=F3_T72_ANGLE)


with BuildPart() as f1_1:
    add(f1.part)

    # F3_t73: cut F3_tool1, F3_tool4, F3_tool7, F3_tool10, F3_tool13, F3_tool16, F3_tool19, F3_tool22, F3_tool25, F3_tool28, F3_tool31, F3_tool34, F3_tool37, F3_tool40, F3_tool43, F3_tool46, F3_tool49, F3_tool52, F3_tool55, F3_tool58, F3_tool61, F3_tool64, F3_tool67, F3_tool70
    add([f3_tool1.part, f3_tool4.part, f3_tool7.part, f3_tool10.part, f3_tool13.part, f3_tool16.part, f3_tool19.part, f3_tool22.part, f3_tool25.part, f3_tool28.part, f3_tool31.part, f3_tool34.part, f3_tool37.part, f3_tool40.part, f3_tool43.part, f3_tool46.part, f3_tool49.part, f3_tool52.part, f3_tool55.part, f3_tool58.part, f3_tool61.part, f3_tool64.part, f3_tool67.part, f3_tool70.part], mode=Mode.SUBTRACT)


solid = f1_1.part
